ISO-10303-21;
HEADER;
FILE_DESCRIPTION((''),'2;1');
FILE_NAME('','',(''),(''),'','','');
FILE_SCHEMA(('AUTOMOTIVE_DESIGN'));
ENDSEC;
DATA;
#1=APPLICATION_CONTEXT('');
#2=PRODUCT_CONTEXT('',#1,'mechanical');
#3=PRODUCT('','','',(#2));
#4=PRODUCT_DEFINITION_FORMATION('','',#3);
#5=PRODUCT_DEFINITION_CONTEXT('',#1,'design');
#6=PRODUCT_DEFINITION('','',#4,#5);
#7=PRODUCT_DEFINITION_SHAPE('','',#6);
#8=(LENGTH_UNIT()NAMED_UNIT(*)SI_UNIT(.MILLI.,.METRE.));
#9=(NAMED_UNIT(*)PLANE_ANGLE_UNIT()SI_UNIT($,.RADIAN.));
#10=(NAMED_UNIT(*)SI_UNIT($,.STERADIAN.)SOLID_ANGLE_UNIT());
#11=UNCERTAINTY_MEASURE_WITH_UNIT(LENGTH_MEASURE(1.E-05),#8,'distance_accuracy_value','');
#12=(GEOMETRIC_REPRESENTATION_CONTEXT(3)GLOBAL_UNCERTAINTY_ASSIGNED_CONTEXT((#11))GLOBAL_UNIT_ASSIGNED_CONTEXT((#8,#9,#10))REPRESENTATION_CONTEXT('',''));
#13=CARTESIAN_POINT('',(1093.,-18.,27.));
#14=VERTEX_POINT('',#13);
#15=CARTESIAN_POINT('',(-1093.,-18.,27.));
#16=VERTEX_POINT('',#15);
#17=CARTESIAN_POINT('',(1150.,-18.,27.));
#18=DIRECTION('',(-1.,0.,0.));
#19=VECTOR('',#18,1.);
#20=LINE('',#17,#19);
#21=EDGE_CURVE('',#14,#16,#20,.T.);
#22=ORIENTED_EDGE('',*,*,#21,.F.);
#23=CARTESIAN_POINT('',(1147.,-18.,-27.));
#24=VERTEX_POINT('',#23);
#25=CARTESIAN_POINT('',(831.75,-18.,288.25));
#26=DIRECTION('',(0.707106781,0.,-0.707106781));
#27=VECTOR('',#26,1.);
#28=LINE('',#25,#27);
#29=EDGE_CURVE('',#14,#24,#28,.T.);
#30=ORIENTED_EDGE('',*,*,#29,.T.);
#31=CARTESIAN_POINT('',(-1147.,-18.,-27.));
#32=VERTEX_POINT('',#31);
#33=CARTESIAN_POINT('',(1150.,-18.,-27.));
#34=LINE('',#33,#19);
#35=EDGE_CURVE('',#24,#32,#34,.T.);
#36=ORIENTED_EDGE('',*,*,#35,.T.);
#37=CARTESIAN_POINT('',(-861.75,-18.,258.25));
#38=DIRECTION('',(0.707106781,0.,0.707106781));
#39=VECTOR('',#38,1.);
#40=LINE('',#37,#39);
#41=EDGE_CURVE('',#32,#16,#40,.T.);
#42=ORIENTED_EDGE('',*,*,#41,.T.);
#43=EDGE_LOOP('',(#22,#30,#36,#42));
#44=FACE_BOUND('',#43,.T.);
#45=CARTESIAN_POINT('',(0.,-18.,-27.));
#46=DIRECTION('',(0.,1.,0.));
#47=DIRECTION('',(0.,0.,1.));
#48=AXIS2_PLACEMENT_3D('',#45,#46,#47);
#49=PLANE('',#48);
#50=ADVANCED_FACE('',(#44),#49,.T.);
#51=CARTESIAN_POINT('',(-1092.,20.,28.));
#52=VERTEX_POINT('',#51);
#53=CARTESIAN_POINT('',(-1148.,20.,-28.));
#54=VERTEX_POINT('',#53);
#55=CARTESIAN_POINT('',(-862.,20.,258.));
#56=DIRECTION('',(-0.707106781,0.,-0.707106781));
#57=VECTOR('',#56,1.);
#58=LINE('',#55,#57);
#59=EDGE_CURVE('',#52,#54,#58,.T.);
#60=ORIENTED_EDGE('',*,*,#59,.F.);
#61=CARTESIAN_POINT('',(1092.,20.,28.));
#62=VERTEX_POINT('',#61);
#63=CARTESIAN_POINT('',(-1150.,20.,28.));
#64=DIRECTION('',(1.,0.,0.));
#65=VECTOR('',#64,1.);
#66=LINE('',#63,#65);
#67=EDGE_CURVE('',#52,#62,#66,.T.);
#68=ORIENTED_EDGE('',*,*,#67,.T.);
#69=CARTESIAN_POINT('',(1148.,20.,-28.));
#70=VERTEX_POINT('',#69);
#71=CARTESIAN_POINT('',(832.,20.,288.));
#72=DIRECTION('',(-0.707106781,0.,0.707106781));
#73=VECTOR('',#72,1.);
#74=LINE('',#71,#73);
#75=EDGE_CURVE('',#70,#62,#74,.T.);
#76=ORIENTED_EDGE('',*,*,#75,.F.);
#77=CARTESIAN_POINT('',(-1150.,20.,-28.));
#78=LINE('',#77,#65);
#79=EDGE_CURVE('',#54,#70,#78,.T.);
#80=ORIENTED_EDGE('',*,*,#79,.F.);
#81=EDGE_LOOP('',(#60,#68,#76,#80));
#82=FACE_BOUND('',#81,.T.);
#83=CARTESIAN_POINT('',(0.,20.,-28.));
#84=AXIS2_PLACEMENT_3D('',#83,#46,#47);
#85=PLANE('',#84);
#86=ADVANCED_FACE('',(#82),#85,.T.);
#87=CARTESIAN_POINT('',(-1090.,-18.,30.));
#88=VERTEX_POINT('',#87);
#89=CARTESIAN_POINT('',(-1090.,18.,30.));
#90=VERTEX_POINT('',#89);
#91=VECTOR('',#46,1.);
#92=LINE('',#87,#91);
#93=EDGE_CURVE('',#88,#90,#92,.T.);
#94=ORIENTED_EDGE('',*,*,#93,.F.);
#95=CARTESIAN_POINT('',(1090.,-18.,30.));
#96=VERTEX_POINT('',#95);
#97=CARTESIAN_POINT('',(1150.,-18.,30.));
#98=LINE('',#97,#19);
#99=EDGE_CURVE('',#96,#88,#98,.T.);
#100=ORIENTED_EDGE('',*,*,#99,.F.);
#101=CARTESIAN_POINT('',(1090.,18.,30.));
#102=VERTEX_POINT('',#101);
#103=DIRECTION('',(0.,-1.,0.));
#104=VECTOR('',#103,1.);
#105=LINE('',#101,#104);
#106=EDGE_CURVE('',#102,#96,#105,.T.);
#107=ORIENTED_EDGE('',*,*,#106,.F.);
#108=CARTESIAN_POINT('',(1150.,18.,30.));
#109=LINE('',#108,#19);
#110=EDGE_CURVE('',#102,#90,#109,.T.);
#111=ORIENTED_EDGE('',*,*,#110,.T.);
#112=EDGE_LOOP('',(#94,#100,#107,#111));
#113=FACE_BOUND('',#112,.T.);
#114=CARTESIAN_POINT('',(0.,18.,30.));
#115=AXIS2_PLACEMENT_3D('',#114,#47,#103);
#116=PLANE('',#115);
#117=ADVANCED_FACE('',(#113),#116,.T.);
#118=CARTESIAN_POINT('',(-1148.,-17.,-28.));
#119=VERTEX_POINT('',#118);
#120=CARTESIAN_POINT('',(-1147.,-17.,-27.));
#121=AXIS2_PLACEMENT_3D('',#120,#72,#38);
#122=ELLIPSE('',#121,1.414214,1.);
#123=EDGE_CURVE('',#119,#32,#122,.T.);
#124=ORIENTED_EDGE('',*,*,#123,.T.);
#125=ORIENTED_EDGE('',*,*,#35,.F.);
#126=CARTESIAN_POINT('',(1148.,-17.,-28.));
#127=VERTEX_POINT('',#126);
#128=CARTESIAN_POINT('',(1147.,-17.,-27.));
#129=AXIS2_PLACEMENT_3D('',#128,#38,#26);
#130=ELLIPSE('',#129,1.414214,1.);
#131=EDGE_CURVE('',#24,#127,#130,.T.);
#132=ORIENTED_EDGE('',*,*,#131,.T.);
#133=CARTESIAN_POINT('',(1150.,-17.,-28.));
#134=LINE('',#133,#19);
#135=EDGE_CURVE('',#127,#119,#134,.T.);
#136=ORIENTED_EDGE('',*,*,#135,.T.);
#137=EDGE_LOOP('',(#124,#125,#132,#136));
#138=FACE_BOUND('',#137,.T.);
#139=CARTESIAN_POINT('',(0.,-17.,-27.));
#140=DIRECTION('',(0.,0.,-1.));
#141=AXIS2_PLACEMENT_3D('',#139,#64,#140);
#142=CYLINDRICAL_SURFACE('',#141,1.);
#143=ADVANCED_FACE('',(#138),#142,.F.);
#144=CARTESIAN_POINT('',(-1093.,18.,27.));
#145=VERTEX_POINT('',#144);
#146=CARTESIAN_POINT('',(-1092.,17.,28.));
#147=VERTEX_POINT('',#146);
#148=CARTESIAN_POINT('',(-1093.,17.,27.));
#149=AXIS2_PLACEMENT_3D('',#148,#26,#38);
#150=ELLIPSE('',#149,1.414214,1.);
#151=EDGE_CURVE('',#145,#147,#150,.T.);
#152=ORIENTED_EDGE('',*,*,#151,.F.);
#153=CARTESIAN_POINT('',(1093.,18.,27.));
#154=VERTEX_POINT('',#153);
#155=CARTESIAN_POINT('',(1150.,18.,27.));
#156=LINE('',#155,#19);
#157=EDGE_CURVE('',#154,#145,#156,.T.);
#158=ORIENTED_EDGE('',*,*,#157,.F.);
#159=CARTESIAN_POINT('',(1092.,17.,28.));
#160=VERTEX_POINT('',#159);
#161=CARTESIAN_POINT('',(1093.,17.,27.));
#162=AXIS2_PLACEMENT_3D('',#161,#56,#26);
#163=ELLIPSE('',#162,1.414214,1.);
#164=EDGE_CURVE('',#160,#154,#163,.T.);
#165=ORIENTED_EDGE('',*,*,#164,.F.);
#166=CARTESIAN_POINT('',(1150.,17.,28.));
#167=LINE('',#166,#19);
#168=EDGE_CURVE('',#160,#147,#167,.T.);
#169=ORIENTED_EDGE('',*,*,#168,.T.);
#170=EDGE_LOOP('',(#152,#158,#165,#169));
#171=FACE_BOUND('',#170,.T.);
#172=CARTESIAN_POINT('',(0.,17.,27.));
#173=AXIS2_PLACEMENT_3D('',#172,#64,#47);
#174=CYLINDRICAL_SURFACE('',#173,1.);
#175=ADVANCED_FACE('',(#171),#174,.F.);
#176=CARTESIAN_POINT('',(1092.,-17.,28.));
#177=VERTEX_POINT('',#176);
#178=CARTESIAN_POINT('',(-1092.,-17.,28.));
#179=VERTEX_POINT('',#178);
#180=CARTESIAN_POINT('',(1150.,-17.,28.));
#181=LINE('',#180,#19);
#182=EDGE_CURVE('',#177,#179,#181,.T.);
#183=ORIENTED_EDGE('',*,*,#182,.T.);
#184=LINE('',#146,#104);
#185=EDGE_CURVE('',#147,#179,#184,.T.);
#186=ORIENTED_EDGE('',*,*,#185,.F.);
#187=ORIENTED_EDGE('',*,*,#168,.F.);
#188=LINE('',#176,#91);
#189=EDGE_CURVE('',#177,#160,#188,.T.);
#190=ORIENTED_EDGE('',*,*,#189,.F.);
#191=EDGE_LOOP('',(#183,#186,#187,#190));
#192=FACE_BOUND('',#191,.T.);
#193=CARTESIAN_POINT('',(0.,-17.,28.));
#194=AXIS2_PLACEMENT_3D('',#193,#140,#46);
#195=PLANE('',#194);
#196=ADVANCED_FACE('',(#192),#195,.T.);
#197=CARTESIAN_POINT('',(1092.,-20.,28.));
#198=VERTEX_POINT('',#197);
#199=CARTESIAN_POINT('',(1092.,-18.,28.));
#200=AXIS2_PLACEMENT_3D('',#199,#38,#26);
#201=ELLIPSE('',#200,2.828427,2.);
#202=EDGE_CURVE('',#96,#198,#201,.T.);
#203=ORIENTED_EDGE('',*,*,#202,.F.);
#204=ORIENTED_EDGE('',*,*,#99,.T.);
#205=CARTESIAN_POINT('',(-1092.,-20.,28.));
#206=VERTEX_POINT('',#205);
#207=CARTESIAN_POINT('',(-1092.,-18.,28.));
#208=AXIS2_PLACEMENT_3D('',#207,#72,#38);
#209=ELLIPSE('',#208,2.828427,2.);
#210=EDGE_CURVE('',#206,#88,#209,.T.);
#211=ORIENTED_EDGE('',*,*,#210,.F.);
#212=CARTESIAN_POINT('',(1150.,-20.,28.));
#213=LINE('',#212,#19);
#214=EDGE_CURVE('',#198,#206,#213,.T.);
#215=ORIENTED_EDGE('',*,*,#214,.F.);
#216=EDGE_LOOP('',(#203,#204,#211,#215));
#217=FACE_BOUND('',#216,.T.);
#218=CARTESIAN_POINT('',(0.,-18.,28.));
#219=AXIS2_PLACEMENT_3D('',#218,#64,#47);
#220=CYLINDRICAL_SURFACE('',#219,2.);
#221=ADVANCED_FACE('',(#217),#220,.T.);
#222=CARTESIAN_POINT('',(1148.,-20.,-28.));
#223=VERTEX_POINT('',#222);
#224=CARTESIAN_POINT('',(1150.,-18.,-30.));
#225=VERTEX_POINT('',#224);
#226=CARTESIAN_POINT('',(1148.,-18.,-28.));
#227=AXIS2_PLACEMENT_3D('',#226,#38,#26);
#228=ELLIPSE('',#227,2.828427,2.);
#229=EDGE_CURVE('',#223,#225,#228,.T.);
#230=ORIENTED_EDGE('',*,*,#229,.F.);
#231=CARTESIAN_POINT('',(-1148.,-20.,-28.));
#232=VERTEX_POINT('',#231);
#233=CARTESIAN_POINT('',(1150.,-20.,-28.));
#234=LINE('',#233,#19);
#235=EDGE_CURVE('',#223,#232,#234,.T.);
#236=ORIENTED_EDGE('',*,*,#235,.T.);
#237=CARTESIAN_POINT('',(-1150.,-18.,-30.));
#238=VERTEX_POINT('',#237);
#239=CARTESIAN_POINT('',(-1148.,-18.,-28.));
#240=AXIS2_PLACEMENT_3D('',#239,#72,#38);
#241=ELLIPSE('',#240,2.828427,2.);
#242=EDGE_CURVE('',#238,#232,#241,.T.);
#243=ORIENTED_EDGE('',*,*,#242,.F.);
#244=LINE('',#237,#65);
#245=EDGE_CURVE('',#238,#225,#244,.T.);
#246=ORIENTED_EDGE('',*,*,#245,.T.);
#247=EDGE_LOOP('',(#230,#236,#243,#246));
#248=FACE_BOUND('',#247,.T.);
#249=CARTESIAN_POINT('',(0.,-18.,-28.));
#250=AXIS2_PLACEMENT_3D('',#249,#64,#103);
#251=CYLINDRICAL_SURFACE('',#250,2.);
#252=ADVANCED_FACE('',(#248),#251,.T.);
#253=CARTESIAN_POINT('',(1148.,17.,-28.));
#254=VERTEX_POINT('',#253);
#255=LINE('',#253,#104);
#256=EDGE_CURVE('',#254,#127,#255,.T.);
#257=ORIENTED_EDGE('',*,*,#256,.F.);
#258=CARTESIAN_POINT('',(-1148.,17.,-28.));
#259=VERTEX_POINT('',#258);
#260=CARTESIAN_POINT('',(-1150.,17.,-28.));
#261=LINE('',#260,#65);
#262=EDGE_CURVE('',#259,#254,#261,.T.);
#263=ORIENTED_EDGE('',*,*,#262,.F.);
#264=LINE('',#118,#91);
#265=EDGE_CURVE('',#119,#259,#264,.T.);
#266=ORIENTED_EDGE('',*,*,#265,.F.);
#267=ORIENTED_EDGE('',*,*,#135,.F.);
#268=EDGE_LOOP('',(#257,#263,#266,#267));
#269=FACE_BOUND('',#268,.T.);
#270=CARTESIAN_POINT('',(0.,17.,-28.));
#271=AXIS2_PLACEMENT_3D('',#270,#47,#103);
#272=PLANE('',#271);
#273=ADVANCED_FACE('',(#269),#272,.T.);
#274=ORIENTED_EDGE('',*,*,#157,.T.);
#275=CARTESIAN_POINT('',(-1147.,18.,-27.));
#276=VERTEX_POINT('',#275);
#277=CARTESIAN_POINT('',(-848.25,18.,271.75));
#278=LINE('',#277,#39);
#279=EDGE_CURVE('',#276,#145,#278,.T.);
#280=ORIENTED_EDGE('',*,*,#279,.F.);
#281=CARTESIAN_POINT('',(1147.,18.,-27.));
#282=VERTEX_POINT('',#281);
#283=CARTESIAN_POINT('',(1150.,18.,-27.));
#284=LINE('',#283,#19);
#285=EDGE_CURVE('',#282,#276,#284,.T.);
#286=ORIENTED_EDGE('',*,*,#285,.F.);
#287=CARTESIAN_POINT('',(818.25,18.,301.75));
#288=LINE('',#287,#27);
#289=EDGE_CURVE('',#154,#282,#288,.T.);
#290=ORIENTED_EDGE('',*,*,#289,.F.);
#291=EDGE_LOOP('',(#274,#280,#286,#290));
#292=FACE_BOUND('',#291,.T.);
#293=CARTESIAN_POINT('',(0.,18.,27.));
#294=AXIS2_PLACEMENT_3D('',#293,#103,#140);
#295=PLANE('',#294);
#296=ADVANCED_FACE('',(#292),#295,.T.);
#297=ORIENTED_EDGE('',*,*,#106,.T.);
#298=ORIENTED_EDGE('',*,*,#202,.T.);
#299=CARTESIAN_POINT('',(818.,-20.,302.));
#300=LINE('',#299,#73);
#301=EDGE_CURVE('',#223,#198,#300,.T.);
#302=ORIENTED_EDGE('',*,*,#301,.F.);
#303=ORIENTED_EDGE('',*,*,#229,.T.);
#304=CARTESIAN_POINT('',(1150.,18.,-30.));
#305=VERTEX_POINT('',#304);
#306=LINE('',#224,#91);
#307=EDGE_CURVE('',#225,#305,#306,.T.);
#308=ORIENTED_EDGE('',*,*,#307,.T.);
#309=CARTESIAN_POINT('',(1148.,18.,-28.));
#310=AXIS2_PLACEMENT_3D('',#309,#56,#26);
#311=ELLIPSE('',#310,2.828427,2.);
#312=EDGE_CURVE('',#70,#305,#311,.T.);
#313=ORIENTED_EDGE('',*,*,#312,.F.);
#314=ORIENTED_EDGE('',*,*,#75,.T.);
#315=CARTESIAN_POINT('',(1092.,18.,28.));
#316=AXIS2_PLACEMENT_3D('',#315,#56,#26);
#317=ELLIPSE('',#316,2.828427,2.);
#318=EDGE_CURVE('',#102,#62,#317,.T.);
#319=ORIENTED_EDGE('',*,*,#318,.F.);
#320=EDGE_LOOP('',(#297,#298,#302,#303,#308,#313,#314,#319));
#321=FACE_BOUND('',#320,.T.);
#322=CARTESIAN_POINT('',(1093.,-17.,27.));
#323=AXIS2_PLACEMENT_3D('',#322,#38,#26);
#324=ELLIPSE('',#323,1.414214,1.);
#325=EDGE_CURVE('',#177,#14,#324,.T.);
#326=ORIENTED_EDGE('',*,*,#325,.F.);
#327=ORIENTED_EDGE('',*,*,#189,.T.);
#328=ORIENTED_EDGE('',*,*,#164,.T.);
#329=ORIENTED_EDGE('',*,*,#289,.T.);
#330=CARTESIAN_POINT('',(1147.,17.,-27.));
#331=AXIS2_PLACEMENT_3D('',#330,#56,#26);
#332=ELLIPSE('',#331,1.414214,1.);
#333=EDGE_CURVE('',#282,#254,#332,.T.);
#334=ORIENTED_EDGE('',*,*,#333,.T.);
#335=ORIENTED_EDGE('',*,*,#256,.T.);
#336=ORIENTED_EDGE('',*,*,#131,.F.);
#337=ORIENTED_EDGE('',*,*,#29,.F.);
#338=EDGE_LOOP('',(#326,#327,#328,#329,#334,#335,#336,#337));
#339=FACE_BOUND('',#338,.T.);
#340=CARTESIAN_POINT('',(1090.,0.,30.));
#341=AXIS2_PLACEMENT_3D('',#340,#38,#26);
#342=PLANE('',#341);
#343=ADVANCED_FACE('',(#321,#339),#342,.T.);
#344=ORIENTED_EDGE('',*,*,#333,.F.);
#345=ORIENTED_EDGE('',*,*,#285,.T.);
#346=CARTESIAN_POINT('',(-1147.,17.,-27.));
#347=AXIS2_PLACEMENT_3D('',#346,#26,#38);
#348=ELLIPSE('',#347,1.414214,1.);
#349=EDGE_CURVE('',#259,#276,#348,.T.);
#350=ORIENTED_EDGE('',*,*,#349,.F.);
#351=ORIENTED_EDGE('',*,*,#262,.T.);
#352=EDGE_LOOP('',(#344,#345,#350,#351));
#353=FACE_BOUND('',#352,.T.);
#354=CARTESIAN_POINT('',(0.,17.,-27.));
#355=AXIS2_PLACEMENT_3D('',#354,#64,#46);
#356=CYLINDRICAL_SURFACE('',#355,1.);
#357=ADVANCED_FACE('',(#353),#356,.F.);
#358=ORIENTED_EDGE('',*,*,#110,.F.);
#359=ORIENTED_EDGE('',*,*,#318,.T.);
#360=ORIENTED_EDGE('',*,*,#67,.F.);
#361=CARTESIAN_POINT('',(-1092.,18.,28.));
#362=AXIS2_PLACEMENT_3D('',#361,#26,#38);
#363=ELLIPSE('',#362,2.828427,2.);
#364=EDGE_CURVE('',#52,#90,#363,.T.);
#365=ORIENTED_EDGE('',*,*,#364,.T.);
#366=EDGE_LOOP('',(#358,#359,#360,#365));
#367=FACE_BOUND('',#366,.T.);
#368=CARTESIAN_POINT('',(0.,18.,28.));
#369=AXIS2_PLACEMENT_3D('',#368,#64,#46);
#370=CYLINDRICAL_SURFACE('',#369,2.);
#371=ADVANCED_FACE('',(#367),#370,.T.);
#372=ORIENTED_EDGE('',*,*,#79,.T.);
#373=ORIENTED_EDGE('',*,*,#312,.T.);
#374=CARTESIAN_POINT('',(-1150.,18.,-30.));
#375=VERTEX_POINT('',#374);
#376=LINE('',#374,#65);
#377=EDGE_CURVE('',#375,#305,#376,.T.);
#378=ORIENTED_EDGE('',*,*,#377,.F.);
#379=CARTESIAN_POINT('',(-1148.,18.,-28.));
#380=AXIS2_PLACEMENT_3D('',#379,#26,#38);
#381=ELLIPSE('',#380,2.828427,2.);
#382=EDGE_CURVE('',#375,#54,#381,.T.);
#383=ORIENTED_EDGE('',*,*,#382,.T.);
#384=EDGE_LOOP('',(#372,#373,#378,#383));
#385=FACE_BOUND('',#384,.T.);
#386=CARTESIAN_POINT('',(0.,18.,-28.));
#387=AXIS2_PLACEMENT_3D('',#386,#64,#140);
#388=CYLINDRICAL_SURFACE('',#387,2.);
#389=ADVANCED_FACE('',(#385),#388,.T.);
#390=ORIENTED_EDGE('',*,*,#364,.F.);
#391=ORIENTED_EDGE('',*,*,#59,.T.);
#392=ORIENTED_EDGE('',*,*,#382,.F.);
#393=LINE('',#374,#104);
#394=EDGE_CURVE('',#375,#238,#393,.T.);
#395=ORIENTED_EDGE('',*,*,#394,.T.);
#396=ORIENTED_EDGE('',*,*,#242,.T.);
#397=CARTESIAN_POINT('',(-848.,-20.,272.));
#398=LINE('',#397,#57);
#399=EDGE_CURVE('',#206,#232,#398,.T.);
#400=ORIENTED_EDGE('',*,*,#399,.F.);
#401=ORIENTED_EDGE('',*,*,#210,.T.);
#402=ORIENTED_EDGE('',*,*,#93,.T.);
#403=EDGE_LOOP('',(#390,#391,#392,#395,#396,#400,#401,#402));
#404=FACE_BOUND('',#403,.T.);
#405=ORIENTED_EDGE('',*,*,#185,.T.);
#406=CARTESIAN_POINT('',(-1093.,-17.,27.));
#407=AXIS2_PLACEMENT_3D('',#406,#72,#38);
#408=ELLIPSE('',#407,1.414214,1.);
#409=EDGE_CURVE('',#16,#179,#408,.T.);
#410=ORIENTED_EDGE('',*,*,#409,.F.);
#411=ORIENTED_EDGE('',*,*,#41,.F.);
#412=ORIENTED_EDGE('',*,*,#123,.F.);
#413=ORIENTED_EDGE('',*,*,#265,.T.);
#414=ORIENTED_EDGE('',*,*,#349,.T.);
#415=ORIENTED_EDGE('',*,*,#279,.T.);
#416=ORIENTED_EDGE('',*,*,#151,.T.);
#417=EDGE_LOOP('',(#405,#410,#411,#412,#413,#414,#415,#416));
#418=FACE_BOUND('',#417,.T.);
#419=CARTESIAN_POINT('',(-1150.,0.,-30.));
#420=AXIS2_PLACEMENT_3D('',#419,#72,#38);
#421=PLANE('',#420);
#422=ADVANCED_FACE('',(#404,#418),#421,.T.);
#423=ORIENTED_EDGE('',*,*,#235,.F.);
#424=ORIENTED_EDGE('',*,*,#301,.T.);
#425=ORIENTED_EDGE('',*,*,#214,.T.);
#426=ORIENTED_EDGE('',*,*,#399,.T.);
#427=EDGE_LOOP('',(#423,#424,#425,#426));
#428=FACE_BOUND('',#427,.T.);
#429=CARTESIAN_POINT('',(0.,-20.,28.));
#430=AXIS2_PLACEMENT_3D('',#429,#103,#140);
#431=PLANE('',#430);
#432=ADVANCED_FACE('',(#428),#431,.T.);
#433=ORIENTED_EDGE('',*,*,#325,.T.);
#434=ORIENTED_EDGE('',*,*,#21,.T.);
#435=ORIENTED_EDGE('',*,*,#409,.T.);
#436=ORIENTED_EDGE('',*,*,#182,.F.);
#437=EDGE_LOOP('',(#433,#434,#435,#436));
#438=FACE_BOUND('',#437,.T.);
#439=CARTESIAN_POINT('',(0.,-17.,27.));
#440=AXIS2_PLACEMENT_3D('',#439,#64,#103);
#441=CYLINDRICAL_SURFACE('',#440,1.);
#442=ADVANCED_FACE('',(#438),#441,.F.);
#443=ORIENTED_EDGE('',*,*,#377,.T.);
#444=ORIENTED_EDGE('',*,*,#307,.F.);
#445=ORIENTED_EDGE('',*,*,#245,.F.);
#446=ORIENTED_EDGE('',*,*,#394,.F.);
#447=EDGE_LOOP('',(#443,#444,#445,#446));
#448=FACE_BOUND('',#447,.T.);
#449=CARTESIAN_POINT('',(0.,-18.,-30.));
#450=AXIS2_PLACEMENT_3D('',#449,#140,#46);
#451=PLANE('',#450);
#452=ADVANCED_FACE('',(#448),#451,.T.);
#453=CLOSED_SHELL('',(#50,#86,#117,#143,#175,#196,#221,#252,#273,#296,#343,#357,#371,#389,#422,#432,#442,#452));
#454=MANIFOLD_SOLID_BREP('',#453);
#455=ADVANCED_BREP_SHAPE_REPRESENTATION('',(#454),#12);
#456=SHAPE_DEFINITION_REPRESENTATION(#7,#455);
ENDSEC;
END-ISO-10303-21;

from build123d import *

# Parameters (mm, degrees)
F1_DEPTH      = 1150
F1_DEPTH_BACK = 1150
F3_DEPTH      = 25
F3_DEPTH_BACK = 25


with BuildPart() as f1:
    # F0 (on Right) → F1 (new body, two sides)
    with BuildSketch(Plane.YZ) as f1_sk:
        with BuildLine():
            ThreePointArc((-20, -28), (-19.4142135624, -29.4142135624), (-18, -30))
            Line((-18, -30), (18, -30))
            ThreePointArc((18, -30), (19.4142135624, -29.4142135624), (20, -28))
            Line((20, -28), (20, 28))
            ThreePointArc((20, 28), (19.4142135624, 29.4142135624), (18, 30))
            Line((18, 30), (-18, 30))
            ThreePointArc((-18, 30), (-19.4142135624, 29.4142135624), (-20, 28))
            Line((-20, 28), (-20, -28))
        make_face()
        with BuildLine():
            Line((17, -28), (-17, -28))
            ThreePointArc((-17, -28), (-17.7071067812, -27.7071067812), (-18, -27))
            Line((-18, -27), (-18, 27))
            ThreePointArc((-18, 27), (-17.7071067812, 27.7071067812), (-17, 28))
            Line((-17, 28), (17, 28))
            ThreePointArc((17, 28), (17.7071067812, 27.7071067812), (18, 27))
            Line((18, 27), (18, -27))
            ThreePointArc((18, -27), (17.7071067812, -27.7071067812), (17, -28))
        make_face(mode=Mode.SUBTRACT)
    extrude(amount=F1_DEPTH)
    extrude(f1_sk.sketch, amount=-F1_DEPTH_BACK)

    # F2 (on Front) → F3 (cut, two sides)
    with BuildSketch(Plane.XZ) as f3_sk:
        Polygon((-1150, 30), (-1150, -30), (-1090, 30), align=None)
        Polygon((1090, 30), (1150, -30), (1150, 30), align=None)
    extrude(amount=-F3_DEPTH, mode=Mode.SUBTRACT)
    extrude(f3_sk.sketch, amount=F3_DEPTH_BACK, mode=Mode.SUBTRACT)


solid = f1.part
